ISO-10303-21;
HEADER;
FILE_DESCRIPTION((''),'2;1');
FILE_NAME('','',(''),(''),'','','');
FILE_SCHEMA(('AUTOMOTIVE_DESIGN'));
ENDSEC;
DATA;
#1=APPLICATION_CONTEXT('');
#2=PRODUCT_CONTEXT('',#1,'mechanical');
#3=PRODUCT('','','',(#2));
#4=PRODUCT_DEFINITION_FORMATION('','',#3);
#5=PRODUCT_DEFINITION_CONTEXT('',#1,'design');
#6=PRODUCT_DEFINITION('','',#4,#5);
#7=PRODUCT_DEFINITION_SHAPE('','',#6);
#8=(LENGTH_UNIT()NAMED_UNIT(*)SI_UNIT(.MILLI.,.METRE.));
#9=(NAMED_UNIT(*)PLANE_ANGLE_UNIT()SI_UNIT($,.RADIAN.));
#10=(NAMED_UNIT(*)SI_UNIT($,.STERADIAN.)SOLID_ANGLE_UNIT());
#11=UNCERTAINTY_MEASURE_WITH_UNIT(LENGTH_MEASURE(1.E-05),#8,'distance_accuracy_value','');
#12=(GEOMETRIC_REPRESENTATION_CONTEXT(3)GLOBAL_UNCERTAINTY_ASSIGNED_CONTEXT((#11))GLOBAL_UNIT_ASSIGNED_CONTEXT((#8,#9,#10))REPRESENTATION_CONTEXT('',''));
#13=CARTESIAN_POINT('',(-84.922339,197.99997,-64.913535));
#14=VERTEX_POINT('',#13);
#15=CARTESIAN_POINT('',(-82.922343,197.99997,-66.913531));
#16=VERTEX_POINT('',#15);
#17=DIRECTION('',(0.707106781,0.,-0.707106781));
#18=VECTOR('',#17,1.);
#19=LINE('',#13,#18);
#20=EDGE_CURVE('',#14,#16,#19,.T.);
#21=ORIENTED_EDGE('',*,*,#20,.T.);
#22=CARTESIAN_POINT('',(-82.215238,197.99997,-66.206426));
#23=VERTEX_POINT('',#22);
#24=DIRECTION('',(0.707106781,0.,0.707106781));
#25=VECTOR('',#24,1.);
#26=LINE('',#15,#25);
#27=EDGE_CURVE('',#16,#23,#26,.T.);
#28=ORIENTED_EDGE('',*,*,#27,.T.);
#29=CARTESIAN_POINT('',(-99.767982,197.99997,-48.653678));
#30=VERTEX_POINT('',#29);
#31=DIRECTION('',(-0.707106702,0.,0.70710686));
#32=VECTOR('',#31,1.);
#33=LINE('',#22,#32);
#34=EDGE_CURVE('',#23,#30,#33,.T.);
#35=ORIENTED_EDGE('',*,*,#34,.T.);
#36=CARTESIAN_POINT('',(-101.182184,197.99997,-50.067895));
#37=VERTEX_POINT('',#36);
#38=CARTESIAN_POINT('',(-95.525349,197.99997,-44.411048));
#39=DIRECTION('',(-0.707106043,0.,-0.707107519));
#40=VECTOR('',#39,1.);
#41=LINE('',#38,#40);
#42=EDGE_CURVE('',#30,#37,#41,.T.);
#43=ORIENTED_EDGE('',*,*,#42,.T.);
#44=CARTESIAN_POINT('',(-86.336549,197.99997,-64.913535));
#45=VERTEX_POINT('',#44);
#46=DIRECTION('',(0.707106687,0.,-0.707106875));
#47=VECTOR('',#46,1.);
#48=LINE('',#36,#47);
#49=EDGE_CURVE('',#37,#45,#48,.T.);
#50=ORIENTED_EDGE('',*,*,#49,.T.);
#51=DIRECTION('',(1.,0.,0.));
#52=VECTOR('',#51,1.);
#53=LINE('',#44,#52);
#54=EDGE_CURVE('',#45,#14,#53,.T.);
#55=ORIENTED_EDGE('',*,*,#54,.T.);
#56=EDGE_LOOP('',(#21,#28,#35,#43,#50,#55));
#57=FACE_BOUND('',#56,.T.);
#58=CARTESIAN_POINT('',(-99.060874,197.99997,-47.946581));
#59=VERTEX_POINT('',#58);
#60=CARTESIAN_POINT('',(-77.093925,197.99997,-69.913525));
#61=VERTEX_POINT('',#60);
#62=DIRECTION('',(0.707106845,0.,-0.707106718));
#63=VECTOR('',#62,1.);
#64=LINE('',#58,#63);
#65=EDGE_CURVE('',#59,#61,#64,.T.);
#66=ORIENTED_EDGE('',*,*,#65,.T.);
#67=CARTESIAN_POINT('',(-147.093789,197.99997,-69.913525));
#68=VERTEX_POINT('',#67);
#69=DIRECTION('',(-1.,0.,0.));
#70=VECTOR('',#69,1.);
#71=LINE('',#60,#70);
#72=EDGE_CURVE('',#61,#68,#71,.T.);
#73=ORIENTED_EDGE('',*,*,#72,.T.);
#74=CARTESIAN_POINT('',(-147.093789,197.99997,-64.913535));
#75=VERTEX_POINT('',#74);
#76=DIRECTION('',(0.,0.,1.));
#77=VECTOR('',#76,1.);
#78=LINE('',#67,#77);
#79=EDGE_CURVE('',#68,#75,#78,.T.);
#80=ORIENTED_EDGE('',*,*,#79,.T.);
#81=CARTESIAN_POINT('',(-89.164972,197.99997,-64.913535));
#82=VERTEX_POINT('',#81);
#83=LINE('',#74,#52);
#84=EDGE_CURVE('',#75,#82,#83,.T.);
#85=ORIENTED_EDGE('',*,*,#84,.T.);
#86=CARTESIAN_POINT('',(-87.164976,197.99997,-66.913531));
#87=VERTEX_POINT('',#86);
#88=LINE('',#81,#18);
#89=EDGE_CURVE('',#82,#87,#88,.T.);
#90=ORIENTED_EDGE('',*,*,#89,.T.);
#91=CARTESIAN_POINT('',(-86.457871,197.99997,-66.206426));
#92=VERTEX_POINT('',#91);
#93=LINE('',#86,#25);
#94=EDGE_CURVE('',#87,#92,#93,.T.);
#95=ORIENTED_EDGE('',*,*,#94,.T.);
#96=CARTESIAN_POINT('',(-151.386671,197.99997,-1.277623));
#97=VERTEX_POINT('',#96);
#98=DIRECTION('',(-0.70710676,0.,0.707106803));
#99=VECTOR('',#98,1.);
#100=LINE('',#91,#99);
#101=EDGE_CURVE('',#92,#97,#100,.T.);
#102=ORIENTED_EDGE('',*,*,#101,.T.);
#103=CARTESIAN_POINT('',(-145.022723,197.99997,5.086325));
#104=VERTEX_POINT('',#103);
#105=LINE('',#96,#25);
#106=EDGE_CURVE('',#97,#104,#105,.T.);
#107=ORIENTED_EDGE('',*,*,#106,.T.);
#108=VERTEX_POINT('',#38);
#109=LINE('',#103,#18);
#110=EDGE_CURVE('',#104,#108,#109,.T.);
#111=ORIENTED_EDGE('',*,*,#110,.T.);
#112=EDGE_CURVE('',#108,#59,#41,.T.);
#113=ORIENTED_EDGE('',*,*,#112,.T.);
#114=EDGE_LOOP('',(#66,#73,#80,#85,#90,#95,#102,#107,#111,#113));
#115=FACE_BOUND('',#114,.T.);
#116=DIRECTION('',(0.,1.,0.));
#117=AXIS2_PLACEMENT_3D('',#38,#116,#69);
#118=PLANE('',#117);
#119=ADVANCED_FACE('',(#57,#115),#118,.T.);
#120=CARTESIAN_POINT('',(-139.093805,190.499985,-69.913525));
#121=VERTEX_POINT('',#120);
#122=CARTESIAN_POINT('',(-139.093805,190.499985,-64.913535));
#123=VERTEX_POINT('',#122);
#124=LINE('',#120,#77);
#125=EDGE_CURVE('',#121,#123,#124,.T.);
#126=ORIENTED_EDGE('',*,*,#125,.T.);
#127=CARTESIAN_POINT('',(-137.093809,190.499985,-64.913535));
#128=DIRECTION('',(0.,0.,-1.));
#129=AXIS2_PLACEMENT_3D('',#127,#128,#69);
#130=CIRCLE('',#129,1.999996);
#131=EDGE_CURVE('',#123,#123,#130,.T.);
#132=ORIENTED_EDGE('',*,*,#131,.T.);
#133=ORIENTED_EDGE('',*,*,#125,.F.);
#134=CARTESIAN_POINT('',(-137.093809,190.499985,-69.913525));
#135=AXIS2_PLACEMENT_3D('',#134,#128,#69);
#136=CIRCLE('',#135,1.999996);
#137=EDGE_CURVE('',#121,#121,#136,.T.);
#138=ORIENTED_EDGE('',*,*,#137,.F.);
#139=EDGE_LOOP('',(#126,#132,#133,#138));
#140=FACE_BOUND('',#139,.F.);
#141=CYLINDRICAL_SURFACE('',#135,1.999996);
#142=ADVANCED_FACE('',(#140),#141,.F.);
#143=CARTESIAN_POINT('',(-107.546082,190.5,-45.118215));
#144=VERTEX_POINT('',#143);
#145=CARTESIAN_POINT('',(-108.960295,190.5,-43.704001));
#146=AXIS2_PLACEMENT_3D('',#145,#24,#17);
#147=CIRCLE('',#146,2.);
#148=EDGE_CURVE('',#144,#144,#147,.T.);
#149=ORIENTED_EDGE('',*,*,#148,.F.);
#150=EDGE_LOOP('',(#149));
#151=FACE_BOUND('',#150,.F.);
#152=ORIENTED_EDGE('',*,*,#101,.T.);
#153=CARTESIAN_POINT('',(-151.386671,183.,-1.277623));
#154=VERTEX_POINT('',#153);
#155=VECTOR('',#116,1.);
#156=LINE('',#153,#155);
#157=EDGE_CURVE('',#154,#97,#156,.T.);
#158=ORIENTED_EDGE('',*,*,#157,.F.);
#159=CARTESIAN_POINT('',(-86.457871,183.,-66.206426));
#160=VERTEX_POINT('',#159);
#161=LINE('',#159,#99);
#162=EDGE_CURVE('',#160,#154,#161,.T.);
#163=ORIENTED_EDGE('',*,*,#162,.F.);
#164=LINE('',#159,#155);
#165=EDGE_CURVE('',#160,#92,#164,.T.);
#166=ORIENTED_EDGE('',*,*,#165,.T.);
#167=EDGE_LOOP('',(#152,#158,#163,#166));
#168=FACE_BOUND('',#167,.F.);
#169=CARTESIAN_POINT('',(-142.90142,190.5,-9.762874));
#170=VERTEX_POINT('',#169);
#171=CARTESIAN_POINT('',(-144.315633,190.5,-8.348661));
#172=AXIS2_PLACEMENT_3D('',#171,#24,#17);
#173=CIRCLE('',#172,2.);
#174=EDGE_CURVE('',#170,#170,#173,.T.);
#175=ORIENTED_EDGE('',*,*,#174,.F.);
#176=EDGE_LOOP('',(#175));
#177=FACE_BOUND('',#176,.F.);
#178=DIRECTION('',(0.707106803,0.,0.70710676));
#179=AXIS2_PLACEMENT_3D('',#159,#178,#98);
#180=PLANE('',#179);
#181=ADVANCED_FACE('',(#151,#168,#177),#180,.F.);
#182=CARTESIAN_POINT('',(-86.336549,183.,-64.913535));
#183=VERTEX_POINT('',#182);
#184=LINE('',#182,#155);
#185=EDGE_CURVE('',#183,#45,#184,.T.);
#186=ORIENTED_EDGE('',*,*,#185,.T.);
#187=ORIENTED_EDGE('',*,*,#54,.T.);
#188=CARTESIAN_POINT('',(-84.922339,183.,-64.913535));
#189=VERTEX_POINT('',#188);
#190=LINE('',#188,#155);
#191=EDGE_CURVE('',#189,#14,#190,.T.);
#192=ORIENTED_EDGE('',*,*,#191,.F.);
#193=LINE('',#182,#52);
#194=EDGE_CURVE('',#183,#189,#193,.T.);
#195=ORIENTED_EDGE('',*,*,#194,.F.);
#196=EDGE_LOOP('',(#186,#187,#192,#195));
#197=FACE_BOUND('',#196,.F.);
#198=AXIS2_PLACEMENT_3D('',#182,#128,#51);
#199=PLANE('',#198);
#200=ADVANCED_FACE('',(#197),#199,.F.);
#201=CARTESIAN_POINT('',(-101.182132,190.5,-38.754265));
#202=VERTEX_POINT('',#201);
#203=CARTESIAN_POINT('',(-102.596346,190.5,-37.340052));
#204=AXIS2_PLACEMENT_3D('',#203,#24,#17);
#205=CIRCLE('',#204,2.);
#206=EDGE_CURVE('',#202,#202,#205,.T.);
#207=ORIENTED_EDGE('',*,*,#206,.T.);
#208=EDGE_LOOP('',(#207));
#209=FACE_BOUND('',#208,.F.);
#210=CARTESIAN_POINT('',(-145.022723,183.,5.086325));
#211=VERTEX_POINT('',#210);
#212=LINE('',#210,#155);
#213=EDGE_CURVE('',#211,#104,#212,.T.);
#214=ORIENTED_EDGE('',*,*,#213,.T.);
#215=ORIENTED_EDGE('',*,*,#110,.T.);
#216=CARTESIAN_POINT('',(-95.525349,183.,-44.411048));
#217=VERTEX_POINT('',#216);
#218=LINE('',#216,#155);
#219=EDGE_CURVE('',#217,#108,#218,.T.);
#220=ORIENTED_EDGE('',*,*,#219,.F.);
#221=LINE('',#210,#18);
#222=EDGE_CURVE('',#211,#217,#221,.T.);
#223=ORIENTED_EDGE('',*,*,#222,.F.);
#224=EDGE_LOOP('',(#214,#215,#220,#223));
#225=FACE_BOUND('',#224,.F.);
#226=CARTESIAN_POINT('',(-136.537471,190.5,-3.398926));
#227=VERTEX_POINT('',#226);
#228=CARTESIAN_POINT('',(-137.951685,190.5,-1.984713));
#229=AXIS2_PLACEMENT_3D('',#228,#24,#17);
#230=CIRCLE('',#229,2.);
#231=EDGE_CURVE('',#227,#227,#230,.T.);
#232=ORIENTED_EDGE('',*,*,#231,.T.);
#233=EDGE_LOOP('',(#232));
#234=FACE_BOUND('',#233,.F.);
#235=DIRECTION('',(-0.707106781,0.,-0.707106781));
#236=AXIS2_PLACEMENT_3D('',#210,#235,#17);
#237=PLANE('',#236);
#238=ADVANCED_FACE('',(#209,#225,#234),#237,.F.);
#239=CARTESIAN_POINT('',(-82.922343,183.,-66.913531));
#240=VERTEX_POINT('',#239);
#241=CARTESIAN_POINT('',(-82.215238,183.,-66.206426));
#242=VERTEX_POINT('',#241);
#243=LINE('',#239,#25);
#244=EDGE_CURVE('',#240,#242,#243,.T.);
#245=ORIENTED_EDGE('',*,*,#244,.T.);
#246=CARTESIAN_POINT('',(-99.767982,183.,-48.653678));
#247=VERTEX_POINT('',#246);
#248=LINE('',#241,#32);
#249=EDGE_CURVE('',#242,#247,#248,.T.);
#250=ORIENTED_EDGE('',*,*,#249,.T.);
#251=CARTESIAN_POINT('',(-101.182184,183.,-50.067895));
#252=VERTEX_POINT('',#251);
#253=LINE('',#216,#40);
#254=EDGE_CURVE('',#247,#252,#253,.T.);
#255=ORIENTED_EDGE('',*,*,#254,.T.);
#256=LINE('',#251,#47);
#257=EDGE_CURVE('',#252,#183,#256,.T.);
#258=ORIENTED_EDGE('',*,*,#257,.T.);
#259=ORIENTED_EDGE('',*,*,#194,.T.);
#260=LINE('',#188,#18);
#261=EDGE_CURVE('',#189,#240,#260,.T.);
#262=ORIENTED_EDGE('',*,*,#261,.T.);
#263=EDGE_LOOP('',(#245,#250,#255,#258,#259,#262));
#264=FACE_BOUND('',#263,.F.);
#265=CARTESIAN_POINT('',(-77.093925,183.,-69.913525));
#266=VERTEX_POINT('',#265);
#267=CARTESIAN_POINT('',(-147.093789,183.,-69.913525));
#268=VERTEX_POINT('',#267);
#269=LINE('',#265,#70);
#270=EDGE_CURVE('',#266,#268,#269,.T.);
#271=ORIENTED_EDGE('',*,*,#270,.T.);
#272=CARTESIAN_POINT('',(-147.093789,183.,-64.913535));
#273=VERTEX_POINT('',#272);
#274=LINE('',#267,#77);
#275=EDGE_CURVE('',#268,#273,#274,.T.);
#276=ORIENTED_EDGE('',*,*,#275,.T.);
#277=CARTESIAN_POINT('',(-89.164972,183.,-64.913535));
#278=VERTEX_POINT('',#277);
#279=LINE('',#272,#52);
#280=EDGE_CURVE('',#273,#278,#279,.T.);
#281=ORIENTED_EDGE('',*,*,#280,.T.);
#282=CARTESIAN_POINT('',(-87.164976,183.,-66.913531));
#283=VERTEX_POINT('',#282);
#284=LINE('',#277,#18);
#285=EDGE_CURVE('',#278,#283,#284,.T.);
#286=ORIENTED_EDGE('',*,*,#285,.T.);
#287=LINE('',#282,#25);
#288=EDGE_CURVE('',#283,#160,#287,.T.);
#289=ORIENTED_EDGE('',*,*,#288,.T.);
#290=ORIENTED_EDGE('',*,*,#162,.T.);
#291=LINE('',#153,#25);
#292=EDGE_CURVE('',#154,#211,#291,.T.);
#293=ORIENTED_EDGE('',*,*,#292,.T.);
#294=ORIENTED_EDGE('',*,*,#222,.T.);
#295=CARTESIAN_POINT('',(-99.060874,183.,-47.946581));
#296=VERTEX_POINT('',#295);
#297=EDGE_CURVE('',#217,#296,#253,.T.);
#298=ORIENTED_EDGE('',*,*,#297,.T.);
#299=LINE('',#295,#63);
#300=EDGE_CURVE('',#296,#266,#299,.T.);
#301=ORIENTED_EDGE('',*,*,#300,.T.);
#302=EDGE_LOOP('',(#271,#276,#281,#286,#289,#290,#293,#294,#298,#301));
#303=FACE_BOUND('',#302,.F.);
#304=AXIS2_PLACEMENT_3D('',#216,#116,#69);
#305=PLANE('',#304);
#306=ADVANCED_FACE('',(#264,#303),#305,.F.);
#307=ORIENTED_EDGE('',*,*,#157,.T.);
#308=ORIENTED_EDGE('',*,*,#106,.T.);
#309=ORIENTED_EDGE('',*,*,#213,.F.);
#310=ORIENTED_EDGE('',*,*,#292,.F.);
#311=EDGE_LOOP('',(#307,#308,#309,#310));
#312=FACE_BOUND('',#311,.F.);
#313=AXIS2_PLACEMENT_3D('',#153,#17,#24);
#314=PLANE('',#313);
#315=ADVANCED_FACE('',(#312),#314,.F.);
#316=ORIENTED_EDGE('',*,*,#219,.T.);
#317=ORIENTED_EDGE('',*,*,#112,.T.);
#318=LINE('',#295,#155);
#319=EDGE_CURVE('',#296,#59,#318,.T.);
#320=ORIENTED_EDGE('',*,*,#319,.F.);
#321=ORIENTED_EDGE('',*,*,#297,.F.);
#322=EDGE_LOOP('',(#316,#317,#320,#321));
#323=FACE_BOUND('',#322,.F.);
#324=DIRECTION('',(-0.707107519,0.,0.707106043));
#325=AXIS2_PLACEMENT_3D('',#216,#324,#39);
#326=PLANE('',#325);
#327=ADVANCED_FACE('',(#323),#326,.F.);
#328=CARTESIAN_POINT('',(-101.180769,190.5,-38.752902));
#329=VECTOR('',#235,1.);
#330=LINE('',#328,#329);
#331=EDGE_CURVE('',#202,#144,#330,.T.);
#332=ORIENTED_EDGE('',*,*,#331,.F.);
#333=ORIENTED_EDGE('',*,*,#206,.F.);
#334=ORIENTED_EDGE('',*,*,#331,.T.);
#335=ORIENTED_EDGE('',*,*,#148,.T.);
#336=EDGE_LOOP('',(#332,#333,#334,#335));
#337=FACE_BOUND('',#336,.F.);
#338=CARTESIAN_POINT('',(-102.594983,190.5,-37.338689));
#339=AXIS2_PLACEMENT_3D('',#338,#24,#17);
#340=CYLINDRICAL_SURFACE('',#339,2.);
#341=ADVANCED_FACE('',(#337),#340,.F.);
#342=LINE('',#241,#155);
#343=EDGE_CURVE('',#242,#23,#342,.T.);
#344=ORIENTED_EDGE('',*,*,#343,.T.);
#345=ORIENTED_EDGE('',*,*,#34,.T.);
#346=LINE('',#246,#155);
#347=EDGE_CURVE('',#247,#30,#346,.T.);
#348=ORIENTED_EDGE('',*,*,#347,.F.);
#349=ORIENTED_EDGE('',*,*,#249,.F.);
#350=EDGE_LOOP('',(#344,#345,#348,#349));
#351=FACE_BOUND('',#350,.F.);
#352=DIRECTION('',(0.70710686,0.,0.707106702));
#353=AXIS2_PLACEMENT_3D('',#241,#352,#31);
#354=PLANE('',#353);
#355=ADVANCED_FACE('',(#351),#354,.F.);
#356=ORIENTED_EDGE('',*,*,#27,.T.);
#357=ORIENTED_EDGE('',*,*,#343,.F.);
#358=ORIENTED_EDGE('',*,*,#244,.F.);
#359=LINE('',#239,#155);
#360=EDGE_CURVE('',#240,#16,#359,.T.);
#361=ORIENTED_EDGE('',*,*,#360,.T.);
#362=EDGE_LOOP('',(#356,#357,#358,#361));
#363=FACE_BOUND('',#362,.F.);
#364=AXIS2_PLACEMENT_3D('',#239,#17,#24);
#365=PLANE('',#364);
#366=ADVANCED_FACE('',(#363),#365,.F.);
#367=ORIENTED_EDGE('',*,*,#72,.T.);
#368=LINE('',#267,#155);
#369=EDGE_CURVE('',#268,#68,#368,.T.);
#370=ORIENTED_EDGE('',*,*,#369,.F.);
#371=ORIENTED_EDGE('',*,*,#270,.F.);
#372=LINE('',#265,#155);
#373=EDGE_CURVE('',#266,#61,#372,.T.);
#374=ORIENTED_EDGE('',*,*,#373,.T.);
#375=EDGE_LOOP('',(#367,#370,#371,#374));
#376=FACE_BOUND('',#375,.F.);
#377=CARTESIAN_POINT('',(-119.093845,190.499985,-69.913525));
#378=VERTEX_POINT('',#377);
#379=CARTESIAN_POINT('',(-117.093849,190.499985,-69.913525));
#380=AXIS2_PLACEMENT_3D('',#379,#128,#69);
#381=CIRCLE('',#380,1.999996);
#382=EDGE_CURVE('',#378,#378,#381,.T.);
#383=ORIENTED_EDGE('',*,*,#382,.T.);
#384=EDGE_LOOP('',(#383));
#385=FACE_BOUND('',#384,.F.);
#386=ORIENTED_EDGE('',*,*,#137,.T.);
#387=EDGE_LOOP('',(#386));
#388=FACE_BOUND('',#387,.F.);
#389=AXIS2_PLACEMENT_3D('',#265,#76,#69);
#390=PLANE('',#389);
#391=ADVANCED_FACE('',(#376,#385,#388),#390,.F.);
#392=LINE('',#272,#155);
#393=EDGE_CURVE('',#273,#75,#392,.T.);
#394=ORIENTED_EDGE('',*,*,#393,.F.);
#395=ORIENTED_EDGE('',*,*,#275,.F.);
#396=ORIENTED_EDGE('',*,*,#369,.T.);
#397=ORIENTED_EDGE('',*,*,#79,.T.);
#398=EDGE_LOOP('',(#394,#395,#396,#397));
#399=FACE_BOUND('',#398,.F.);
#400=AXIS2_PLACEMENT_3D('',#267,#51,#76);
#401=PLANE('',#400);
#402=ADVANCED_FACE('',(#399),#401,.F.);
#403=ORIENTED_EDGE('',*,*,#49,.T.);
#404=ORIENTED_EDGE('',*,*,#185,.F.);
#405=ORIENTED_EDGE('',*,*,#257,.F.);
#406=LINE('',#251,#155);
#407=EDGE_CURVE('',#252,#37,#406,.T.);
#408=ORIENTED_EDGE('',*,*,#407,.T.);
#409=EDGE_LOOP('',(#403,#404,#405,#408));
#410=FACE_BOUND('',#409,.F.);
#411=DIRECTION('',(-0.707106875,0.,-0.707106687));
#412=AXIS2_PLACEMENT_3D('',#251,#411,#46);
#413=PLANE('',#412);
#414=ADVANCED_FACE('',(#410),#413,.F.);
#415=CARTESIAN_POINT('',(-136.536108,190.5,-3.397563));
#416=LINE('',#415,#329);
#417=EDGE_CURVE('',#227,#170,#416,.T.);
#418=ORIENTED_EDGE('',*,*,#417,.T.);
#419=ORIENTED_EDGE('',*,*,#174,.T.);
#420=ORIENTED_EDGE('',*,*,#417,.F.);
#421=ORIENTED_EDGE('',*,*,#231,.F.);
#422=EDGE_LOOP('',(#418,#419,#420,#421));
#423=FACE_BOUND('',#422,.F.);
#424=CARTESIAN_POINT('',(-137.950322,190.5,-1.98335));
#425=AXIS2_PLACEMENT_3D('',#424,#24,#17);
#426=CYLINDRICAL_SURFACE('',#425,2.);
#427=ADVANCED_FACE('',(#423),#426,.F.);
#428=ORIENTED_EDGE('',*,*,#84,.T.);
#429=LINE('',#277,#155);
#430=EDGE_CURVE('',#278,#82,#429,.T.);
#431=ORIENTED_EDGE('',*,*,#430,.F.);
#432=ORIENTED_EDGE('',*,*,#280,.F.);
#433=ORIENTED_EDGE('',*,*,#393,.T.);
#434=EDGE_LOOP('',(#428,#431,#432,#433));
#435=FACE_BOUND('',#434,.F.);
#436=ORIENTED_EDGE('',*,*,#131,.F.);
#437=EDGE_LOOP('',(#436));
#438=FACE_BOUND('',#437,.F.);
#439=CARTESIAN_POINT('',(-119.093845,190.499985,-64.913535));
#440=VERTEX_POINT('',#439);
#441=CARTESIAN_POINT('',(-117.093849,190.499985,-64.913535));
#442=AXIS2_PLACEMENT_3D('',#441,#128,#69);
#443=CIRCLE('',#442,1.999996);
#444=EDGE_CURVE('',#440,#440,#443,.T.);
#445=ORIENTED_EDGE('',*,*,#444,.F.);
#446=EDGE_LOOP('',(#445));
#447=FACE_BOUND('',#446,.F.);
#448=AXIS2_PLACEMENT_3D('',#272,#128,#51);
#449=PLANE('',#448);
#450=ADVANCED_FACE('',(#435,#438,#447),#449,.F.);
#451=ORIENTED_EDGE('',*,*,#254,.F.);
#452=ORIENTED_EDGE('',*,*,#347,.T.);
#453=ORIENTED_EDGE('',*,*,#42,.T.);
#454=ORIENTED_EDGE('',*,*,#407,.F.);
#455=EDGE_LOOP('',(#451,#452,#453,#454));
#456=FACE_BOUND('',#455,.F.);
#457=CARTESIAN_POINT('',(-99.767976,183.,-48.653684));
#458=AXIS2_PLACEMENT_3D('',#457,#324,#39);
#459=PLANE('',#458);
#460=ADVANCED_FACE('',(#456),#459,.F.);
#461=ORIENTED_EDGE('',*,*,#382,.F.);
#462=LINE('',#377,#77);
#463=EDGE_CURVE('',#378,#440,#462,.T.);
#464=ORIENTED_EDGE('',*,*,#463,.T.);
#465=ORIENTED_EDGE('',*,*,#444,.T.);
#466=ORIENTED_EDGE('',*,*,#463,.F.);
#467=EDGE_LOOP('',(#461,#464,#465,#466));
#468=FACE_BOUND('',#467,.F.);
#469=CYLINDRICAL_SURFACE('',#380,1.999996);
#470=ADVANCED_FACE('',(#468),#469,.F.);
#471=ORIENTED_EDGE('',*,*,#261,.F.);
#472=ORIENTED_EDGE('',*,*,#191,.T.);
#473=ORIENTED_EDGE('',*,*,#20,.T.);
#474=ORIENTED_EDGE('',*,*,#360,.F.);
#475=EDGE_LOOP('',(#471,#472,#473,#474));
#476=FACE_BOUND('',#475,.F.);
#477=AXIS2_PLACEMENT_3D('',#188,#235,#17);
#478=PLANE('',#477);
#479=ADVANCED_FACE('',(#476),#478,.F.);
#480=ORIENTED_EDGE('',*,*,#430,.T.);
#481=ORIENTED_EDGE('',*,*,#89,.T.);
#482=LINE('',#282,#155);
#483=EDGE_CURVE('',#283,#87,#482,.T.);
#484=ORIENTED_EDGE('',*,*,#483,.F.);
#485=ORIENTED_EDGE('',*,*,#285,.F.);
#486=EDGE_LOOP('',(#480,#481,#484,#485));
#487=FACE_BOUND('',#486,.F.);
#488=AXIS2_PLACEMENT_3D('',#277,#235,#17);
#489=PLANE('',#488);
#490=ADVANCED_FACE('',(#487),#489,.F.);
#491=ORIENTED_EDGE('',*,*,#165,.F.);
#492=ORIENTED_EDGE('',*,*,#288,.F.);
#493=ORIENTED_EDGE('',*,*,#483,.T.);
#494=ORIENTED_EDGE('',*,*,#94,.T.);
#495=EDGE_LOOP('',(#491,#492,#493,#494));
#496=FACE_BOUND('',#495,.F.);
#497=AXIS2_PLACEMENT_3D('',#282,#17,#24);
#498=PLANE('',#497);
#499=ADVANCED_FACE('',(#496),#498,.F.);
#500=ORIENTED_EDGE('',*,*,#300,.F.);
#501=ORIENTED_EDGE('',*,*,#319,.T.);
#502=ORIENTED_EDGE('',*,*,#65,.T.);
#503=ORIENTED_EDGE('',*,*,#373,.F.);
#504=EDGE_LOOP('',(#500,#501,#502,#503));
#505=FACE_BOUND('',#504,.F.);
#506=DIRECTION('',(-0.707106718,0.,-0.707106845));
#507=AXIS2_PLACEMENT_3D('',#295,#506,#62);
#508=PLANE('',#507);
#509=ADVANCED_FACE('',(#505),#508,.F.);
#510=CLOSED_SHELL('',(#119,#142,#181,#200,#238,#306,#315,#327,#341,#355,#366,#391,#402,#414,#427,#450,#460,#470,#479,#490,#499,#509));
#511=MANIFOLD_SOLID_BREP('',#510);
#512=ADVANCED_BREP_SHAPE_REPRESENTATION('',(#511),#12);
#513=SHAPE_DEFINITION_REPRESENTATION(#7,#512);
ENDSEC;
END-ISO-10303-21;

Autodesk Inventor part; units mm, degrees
ref_plane "YZ Plane" through (0, 0, 0) normal (1, 0, 0) x (0, 1, 0)
ref_plane "XZ Plane" through (0, 0, 0) normal (0, 1, 0) x (-1, 0, 0)
ref_plane "XY Plane" through (0, 0, 0) normal (0, 0, 1) x (1, 0, 0)
sketch "Sketch1" plane through (475.3607, 0, -304.7358) normal (0, 1, 0) x (-1, 0, 0)
  line L0 (-230.3144, -553.6037) -> (1418.8804, 1095.5912)
  line L1 (1257.2358, 1257.2358) -> (0, 0)
  line L2 (0, 0) -> (143.6839, -143.6842)
  line L3 (1418.8804, 1095.5912) -> (1257.2358, 1257.2358)
  line L4 (143.684, -143.6842) -> (-233.396, -520.7642)
  line L5 (-338.0775, -553.6037) -> (107.7631, -107.763)
  line L6 (89.8025, -89.8027) -> (-468.1591, -647.7642)
  line L7 (-468.1591, -647.7642) -> (1309.841, -647.7642)
  line L8 (1309.841, -520.7642) -> (-161.5539, -520.7642)
  line L9 (-161.5539, -520.7642) -> (-212.3539, -571.5642)
  line L10 (-212.3539, -571.5642) -> (-230.3144, -553.6037)
  line L11 (-233.396, -520.7642) -> (-269.317, -520.7642)
  line L12 (-269.317, -520.7642) -> (-320.117, -571.5642)
  line L13 (-320.117, -571.5642) -> (-338.0775, -553.6037)
  line L14 (1309.841, -647.7642) -> (1309.841, -520.7642)
  line L15 (107.7631, -107.763) -> (143.684, -143.6842)
  line L16 (143.6839, -143.6842) -> (-233.396, -520.7642)
  line L17 (-233.396, -520.7642) -> (-269.317, -520.7642)
  line L18 (-269.317, -520.7642) -> (-320.117, -571.5642)
  line L19 (-320.117, -571.5642) -> (-338.0775, -553.6037)
  line L20 (-338.0775, -553.6037) -> (107.7629, -107.7632)
extrude "Extrusion1" add sketch "Sketch1" along normal blind 381
sketch "Sketch2" plane through (943.5197, 0, -952.5) normal (0, 0, -1) x (-1, 0, 0)
  circle A0 centre (1524, 190.5) radius 50.8
  circle A1 centre (1016, 190.5) radius 50.8
  line L0 (1778, 0) -> (1778, 381) projected
  line L1 (0, 381) -> (1778, 381) projected
  point P0 (0, -381)
  dimension "d6" = 101.6
  dimension "d3" = 101.6
  dimension "d5" = 508
  dimension "d4" = 0
  dimension "d8" = 254
  dimension "d7" = 190.5
extrude "Extrusion2" cut sketch "Sketch2" against normal up to surface (127 mm away)
scale "Scale1" factors (0.03937, 0.03937, 0.03937) then translate (-114.2403, 183, -32.4136) bodies 1
sketch "Sketch3" plane through (-95.5254, 183, -44.4111) normal (0.7071068, 0, 0.7071068) x (0.7071068, 0, -0.7071068)
  circle A0 centre (-59.9999, 7.5) radius 2
  circle A1 centre (-9.9999, 7.5) radius 2
  line L0 (-69.9999, 15) -> (0, 15) projected
  line L1 (-69.9999, 0) -> (-69.9999, 15) projected
  point P0 (36.1433, -183)
  dimension "d15" = 4
  dimension "d16" = 4
  dimension "d17" = 7.5
  dimension "d18" = 0
  dimension "d19" = 50
  dimension "d20" = 10
extrude "Extrusion3" cut sketch "Sketch3" against normal blind 10
properties part number "charge" material "ABS Plastic"
